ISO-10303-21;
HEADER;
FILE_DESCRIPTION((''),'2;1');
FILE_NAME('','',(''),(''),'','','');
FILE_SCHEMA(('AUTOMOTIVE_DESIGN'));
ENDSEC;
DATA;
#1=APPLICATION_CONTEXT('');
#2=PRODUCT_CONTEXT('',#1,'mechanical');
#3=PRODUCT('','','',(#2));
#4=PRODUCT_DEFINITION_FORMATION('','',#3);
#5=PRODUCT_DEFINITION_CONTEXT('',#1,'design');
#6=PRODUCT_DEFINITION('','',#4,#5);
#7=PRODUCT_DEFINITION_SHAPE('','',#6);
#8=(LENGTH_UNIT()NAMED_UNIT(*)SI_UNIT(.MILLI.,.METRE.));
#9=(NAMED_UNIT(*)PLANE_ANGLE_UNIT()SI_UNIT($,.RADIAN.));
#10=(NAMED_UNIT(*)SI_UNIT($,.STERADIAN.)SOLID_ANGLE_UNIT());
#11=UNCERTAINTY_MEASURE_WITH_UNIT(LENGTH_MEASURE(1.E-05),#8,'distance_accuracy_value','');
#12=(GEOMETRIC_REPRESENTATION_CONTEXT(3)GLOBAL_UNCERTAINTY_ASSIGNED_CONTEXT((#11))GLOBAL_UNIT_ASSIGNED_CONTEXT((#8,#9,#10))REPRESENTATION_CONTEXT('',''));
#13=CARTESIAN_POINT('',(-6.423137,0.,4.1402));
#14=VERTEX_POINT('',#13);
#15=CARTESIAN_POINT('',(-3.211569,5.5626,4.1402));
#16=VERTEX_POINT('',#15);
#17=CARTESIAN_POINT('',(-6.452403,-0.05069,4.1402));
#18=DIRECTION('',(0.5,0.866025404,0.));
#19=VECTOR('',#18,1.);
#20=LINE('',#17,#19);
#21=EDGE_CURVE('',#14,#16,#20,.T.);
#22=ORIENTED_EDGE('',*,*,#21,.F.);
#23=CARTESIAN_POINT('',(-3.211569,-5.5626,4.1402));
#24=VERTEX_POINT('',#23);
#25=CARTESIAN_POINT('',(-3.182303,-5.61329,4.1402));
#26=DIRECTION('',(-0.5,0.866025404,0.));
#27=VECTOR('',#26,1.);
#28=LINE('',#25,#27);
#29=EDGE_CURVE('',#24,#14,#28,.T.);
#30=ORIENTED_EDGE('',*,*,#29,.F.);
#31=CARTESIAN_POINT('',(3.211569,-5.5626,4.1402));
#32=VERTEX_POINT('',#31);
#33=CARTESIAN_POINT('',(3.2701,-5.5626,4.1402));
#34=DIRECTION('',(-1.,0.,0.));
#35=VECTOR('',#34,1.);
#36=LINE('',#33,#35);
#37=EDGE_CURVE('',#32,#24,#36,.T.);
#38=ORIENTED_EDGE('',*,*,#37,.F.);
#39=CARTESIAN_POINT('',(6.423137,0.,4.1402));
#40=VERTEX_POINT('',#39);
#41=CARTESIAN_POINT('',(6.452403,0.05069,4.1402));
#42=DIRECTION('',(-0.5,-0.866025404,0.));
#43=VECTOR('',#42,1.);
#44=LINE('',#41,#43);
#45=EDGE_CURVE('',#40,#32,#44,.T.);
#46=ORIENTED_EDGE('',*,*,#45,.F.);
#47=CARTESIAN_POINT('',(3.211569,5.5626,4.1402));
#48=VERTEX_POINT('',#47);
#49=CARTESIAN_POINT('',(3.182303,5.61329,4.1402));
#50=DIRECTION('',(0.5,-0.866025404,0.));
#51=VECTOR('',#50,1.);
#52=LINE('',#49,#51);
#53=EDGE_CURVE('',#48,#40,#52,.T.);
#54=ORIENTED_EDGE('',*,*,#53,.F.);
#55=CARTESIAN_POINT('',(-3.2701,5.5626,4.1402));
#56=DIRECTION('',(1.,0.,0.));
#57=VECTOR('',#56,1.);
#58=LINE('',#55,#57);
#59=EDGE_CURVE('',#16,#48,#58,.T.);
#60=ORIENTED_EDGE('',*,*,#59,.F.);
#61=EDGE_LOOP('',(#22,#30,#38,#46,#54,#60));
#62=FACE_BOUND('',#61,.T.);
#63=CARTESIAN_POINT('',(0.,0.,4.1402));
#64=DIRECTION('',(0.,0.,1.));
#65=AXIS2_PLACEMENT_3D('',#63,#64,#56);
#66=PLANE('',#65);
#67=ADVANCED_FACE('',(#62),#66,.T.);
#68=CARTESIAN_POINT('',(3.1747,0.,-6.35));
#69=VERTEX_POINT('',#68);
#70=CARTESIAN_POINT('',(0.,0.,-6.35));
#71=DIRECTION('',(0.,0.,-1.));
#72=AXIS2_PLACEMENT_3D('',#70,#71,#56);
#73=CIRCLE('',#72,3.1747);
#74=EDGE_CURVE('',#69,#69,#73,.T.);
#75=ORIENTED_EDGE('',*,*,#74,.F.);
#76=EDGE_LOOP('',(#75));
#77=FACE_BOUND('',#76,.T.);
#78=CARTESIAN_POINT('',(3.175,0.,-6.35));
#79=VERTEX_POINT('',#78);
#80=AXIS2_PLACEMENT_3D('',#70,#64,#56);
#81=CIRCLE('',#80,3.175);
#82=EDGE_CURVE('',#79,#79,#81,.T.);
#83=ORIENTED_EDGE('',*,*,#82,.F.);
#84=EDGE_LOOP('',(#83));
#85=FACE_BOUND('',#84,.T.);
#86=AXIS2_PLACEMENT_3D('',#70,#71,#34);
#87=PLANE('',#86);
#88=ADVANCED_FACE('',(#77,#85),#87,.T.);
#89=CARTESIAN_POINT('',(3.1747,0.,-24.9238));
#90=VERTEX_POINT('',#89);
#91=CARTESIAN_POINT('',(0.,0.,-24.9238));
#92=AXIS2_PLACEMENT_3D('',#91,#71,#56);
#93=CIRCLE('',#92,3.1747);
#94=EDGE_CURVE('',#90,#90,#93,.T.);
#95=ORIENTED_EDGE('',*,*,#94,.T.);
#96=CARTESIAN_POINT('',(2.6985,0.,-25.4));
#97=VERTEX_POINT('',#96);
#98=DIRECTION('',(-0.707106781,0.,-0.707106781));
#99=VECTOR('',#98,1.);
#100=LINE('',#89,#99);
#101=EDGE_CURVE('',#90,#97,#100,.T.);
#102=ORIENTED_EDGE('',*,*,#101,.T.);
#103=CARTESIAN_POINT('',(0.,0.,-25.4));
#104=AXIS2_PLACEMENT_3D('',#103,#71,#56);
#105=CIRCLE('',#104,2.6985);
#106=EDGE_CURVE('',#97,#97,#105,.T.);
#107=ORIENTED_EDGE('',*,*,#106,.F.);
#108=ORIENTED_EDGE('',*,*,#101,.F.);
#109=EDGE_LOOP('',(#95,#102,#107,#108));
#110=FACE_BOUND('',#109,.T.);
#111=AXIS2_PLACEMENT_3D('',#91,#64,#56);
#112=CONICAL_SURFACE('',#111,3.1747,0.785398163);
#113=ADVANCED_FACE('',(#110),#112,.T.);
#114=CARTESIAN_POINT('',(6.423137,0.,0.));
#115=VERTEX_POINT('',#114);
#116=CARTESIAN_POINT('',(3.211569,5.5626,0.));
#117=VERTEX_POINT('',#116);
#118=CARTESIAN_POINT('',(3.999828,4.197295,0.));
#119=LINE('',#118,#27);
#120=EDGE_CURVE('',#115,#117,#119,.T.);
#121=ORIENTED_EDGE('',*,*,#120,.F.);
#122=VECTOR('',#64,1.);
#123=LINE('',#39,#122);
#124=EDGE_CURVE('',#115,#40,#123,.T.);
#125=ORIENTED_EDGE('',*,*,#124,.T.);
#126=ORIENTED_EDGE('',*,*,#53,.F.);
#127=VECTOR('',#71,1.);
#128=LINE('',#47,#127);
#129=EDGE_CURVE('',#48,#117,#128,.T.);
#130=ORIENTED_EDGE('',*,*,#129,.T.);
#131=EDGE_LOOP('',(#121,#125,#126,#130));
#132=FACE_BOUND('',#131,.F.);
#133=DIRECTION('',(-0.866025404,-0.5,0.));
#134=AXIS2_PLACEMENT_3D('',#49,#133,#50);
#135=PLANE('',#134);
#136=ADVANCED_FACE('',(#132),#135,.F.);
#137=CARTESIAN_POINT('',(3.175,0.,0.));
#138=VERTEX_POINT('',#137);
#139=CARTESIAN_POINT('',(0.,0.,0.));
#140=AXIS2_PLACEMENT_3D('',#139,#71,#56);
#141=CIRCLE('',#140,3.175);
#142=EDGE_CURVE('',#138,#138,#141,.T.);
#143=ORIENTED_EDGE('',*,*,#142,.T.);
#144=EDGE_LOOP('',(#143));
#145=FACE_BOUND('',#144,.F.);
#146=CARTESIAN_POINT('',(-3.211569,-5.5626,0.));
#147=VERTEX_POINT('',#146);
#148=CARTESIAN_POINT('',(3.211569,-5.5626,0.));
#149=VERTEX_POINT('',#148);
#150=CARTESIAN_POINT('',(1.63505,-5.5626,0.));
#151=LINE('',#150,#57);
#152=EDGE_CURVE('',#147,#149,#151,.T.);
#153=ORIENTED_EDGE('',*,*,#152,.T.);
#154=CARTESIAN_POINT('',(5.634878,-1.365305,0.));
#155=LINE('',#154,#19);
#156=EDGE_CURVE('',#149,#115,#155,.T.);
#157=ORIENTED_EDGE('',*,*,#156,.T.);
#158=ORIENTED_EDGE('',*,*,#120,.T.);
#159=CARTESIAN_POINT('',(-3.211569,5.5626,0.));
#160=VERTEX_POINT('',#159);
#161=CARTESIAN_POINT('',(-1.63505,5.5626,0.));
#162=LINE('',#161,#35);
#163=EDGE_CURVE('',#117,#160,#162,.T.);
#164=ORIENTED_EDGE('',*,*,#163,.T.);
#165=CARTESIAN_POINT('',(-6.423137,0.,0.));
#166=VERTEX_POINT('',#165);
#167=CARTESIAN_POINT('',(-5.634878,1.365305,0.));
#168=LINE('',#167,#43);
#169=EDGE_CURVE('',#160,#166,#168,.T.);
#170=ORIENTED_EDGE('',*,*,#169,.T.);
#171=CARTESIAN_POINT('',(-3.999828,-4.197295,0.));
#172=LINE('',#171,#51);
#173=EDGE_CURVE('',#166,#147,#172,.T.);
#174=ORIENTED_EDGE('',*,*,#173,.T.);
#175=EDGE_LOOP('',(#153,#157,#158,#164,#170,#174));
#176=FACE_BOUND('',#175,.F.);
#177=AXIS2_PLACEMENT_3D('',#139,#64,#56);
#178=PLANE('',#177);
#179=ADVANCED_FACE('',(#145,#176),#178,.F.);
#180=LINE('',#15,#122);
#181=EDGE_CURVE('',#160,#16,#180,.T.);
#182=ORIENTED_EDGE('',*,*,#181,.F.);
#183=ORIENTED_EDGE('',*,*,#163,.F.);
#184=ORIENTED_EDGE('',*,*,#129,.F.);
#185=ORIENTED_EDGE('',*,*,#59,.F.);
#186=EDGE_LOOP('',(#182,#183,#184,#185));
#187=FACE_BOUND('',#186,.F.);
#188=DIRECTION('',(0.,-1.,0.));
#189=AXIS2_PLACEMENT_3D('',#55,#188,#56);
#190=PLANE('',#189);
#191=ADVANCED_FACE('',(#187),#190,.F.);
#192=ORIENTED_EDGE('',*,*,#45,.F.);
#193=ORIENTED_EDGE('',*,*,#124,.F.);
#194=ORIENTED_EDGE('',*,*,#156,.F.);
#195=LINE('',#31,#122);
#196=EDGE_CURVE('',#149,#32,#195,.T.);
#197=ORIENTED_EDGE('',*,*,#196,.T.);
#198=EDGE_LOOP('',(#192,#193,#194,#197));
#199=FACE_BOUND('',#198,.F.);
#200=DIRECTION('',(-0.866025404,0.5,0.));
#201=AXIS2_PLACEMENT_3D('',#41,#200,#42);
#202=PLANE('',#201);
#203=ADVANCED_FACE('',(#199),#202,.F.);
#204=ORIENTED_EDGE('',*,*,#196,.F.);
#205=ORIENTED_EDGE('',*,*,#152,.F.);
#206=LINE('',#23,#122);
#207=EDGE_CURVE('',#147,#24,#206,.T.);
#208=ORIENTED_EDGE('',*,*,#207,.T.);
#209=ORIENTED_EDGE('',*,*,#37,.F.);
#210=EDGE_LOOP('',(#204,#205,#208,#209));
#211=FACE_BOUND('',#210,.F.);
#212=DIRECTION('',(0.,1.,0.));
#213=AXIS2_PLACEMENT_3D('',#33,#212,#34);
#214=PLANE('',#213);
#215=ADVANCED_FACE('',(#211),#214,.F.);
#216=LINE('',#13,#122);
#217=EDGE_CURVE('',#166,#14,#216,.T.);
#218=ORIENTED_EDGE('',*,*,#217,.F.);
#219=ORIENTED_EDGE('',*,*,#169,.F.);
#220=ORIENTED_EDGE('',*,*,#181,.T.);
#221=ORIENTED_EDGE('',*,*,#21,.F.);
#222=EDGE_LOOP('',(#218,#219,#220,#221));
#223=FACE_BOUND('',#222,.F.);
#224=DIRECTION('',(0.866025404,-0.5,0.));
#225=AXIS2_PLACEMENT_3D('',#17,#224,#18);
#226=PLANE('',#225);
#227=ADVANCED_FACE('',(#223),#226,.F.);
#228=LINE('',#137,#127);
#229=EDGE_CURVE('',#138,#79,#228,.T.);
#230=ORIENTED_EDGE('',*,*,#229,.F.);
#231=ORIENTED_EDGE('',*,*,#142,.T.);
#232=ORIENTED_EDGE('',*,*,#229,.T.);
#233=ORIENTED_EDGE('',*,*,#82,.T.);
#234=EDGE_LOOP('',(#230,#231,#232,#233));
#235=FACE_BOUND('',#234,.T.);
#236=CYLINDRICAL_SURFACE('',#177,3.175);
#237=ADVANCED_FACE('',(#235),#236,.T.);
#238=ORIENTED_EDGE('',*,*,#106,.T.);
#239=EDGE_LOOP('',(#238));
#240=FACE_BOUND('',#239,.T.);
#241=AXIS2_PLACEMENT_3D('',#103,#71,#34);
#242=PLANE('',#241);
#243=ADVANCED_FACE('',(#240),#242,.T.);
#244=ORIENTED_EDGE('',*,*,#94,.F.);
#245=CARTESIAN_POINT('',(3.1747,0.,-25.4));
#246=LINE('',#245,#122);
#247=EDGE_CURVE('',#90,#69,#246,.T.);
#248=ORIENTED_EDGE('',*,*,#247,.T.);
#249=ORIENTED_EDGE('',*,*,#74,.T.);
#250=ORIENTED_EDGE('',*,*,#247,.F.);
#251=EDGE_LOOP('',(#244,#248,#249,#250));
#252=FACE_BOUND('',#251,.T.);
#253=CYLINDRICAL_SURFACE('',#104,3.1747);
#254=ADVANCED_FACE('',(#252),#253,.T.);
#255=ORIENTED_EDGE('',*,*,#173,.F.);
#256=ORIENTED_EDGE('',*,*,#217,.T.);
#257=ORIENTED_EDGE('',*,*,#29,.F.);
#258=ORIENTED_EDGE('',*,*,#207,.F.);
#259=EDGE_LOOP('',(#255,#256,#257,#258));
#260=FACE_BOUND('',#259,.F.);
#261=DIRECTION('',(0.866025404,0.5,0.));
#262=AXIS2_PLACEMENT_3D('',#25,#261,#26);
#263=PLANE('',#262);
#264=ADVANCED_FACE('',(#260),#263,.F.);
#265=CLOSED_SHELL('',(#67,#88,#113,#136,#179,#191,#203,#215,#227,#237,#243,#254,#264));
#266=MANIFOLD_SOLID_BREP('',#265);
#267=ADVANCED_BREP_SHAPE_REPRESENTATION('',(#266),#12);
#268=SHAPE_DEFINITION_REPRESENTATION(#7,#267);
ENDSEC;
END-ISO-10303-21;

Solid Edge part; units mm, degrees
sketch "Sketch1" plane through (0, 0, 0) normal (0, 0, 1) x (1, 0, 0)
  circle A0 centre (0, 0) radius 6.4526
  dimension "D1" = 12.9052
extrude "Protrusion1" add sketch "Sketch1" along normal blind 4.1402
sketch "Sketch2" plane through (0, 0, 0) normal (0, 0, -1) x (1, 0, 0)
  circle A0 centre (0, 0) radius 3.175
extrude "Protrusion2" add sketch "Sketch2" along normal blind 25.4
sketch "Sketch3" plane through (0, 0, -25.4) normal (0, 0, -1) x (1, 0, 0)
  circle A0 centre (0, 0) radius 3.1747
extrude "Cutout1" cut sketch "Sketch3" against normal blind 19.05 flip side to cut
chamfer "Chamfer_1" distance 0.4762 angle 45 1 edges at (-3.1747, 0, -25.4)
sketch "Sketch4" plane through (0, 0, 4.1402) normal (0, 0, 1) x (1, 0, 0)
  line L0 (-3.2701, 5.5626) -> (3.2701, 5.5626)
  dimension "D1" = 11.1252
extrude "Cutout2" cut sketch "Sketch4" against normal up to next material side at (0, 5.6126, 4.1402)
pattern_circular "Pattern1" count 6 over 360 about axis through (0, 0, 4.1402) along (0, 0, 1) of "Cutout2"
properties part number "147289"
